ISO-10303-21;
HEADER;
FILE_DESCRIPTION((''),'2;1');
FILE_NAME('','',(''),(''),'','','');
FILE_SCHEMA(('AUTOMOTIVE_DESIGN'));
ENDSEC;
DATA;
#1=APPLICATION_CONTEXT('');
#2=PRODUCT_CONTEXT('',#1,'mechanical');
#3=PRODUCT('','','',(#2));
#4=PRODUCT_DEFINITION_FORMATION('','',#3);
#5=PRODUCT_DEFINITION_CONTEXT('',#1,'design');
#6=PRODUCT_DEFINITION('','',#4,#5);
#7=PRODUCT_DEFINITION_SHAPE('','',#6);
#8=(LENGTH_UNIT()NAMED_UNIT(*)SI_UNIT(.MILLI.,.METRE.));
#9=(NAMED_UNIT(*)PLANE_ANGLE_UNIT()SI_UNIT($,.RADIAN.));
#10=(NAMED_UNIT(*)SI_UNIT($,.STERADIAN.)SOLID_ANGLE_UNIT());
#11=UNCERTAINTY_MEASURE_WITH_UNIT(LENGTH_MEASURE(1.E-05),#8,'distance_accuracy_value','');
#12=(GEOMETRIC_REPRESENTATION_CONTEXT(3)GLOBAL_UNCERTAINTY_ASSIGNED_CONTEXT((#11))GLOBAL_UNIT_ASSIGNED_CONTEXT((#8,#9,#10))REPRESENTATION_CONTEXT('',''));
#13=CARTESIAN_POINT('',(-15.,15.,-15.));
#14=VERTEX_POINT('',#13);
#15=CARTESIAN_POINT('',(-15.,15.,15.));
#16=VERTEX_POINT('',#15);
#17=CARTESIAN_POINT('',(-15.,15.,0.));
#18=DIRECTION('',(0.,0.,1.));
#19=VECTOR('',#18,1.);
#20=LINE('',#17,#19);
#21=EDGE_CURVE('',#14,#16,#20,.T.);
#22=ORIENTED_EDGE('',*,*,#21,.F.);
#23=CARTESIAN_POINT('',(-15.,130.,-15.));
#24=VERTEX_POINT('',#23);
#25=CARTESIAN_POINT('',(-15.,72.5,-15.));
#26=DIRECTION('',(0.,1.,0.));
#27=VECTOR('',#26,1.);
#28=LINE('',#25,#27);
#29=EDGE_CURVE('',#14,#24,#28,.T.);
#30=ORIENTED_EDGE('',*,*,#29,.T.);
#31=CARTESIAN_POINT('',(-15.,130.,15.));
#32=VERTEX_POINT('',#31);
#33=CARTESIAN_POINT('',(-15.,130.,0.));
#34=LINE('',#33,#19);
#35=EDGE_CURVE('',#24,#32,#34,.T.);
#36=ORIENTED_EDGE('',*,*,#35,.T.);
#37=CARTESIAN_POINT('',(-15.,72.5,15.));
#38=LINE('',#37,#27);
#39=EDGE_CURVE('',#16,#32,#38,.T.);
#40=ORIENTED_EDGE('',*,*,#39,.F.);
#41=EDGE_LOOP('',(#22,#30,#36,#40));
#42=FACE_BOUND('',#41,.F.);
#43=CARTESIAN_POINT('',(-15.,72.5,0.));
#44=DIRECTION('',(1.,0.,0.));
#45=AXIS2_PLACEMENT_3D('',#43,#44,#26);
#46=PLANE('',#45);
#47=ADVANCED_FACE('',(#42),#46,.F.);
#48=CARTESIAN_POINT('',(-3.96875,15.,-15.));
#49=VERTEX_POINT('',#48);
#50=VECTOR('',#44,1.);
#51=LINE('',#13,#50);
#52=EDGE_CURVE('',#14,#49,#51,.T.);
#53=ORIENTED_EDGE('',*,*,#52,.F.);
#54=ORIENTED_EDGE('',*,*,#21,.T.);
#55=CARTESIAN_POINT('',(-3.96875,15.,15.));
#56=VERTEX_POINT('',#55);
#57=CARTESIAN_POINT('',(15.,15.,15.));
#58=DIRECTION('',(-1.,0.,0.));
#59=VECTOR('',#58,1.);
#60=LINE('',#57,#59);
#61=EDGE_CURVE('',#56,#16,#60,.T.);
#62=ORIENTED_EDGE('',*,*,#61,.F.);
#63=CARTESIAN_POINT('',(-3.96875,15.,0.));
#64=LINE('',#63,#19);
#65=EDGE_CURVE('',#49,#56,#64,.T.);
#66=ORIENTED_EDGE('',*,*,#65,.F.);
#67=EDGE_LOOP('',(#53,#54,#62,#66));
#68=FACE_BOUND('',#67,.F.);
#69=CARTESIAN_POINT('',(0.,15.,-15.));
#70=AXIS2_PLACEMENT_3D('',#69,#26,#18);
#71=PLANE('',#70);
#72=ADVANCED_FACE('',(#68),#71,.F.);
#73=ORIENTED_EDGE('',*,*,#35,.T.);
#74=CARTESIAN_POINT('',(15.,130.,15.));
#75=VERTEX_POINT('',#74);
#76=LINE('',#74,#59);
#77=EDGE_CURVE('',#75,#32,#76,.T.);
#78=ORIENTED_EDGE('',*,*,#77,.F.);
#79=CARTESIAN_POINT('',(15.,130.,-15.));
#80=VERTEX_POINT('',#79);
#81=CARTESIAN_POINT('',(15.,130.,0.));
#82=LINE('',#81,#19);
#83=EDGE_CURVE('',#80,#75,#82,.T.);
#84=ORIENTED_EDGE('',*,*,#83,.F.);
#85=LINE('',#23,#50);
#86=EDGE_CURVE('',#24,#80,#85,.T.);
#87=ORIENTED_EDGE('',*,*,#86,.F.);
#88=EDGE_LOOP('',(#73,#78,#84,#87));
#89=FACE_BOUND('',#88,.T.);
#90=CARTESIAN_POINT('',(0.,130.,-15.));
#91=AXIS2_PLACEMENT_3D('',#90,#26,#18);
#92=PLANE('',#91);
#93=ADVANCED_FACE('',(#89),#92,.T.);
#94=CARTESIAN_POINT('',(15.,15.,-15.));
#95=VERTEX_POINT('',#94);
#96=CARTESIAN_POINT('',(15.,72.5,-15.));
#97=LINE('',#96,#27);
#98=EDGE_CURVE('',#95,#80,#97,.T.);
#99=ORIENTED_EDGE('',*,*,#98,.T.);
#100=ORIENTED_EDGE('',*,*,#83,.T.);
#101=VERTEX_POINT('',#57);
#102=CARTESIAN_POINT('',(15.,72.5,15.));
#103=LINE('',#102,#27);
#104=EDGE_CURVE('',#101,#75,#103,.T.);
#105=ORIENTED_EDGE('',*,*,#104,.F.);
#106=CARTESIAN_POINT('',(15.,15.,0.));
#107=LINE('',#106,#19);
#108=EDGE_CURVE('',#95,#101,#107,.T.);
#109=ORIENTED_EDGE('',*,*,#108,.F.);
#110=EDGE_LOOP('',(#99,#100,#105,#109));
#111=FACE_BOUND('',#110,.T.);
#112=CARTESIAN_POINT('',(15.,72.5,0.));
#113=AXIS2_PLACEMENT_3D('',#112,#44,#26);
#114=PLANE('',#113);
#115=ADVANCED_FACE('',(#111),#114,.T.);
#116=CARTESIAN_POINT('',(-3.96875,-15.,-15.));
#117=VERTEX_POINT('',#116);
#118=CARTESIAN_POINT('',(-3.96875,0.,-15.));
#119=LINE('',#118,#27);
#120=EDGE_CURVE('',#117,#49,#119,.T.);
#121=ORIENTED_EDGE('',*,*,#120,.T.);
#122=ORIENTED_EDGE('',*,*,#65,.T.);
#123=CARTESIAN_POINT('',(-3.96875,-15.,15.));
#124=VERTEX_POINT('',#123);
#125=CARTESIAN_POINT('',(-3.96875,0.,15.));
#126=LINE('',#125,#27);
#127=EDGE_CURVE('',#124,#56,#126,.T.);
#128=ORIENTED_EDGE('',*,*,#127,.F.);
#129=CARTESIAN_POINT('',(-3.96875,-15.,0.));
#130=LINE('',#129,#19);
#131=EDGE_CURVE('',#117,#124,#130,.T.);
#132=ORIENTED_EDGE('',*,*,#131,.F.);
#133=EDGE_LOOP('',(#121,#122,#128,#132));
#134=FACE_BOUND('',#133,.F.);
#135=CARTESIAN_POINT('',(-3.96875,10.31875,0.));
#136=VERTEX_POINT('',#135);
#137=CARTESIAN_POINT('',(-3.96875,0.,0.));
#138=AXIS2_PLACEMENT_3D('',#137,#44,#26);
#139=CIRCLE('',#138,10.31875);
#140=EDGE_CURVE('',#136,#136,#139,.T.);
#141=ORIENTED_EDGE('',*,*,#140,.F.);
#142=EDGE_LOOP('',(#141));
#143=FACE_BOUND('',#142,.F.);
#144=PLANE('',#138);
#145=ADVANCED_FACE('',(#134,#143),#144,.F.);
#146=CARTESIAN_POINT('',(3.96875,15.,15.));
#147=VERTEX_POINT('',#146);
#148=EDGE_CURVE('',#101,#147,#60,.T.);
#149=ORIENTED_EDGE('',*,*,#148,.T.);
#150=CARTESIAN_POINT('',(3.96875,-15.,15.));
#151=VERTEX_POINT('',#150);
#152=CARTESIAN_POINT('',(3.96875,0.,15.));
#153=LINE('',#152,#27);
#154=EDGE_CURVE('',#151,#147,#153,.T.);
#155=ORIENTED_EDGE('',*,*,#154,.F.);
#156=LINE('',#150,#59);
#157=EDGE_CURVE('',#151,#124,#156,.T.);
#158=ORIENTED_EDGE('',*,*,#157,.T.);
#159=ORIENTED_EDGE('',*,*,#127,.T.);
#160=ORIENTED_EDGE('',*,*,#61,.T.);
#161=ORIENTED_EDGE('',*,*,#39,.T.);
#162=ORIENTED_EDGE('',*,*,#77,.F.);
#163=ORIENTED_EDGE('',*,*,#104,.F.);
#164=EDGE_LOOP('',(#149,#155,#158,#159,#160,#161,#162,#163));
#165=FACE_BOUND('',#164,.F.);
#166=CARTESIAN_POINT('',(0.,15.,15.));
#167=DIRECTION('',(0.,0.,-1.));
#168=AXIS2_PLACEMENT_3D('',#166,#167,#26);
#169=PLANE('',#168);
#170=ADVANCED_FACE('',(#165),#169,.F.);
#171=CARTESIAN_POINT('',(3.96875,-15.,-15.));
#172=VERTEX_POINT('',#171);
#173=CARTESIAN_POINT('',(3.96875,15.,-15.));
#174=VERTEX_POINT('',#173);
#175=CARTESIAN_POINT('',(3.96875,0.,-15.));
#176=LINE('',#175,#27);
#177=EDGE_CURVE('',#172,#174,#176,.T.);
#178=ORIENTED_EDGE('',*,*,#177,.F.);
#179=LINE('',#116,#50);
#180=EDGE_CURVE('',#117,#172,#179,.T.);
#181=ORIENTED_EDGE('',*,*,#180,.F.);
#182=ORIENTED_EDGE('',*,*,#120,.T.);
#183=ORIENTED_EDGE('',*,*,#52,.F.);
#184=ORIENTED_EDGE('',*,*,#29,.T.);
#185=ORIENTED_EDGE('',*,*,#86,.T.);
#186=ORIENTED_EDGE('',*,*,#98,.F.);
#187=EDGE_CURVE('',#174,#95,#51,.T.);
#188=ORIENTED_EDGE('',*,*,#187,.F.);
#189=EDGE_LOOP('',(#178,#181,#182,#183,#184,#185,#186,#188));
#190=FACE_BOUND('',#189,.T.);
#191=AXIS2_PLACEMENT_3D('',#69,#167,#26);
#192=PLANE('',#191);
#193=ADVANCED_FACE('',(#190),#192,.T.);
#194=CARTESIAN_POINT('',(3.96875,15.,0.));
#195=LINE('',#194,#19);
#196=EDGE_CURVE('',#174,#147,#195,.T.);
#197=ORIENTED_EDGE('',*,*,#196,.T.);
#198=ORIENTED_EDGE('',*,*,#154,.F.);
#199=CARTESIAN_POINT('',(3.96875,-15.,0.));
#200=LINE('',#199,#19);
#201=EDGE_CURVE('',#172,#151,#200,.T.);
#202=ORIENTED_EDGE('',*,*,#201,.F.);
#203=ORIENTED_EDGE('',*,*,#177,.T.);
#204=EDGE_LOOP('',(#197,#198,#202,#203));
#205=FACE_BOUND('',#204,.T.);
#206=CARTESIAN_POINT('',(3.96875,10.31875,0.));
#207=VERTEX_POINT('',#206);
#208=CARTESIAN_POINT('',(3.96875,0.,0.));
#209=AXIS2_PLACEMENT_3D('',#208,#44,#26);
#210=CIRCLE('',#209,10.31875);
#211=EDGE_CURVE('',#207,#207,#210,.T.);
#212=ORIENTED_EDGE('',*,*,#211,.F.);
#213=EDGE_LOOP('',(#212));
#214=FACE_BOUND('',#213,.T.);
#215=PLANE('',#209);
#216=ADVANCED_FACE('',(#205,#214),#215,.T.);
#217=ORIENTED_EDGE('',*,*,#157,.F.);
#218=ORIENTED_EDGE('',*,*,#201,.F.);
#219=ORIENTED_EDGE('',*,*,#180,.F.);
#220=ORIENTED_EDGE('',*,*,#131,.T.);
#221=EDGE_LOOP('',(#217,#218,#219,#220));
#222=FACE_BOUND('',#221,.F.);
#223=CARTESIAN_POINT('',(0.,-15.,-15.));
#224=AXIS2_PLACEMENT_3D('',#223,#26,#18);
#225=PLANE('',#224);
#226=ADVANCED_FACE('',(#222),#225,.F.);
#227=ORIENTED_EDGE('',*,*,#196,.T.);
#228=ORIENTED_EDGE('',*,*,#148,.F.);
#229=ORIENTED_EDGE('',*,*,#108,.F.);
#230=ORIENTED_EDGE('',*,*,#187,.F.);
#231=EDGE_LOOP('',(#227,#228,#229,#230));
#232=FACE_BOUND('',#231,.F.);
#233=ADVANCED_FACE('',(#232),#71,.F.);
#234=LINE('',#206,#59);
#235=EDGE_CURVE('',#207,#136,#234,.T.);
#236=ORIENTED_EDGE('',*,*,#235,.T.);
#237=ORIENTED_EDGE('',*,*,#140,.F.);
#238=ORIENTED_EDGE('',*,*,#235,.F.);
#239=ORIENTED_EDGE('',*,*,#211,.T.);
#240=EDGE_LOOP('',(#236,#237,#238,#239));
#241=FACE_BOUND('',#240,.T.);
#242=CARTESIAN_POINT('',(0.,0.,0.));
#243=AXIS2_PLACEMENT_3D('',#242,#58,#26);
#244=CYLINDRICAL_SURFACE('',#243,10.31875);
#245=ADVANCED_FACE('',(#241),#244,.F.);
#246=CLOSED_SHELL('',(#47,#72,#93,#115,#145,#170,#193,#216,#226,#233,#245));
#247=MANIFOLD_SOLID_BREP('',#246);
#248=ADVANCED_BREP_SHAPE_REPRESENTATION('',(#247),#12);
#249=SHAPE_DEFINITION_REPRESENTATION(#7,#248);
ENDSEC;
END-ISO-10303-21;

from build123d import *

# Parameters (mm, degrees)
F0_W     = 30
F0_H     = 30
F0_R     = 10.31875
F1_DEPTH = 3.96875
F0_W_2   = 115
F2_DEPTH = 15


# Not quite as in the source:
# - a length typed as a fraction of an inch, garbled in the dataset ("3 / 203.2 mm" for 3/8 in), is restored


with BuildPart() as f1:
    # F0 (on Right) → F1 (new body, symmetric)
    with BuildSketch(Plane.YZ):
        Rectangle(F0_W, F0_H)
        Circle(F0_R, mode=Mode.SUBTRACT)
    extrude(amount=F1_DEPTH, both=True)

    # F0 (on Right) → F2 (join, symmetric)
    with BuildSketch(Plane.YZ):
        with Locations((72.5, 0)):
            Rectangle(F0_W_2, F0_H)
    extrude(amount=F2_DEPTH, both=True)


solid = f1.part
